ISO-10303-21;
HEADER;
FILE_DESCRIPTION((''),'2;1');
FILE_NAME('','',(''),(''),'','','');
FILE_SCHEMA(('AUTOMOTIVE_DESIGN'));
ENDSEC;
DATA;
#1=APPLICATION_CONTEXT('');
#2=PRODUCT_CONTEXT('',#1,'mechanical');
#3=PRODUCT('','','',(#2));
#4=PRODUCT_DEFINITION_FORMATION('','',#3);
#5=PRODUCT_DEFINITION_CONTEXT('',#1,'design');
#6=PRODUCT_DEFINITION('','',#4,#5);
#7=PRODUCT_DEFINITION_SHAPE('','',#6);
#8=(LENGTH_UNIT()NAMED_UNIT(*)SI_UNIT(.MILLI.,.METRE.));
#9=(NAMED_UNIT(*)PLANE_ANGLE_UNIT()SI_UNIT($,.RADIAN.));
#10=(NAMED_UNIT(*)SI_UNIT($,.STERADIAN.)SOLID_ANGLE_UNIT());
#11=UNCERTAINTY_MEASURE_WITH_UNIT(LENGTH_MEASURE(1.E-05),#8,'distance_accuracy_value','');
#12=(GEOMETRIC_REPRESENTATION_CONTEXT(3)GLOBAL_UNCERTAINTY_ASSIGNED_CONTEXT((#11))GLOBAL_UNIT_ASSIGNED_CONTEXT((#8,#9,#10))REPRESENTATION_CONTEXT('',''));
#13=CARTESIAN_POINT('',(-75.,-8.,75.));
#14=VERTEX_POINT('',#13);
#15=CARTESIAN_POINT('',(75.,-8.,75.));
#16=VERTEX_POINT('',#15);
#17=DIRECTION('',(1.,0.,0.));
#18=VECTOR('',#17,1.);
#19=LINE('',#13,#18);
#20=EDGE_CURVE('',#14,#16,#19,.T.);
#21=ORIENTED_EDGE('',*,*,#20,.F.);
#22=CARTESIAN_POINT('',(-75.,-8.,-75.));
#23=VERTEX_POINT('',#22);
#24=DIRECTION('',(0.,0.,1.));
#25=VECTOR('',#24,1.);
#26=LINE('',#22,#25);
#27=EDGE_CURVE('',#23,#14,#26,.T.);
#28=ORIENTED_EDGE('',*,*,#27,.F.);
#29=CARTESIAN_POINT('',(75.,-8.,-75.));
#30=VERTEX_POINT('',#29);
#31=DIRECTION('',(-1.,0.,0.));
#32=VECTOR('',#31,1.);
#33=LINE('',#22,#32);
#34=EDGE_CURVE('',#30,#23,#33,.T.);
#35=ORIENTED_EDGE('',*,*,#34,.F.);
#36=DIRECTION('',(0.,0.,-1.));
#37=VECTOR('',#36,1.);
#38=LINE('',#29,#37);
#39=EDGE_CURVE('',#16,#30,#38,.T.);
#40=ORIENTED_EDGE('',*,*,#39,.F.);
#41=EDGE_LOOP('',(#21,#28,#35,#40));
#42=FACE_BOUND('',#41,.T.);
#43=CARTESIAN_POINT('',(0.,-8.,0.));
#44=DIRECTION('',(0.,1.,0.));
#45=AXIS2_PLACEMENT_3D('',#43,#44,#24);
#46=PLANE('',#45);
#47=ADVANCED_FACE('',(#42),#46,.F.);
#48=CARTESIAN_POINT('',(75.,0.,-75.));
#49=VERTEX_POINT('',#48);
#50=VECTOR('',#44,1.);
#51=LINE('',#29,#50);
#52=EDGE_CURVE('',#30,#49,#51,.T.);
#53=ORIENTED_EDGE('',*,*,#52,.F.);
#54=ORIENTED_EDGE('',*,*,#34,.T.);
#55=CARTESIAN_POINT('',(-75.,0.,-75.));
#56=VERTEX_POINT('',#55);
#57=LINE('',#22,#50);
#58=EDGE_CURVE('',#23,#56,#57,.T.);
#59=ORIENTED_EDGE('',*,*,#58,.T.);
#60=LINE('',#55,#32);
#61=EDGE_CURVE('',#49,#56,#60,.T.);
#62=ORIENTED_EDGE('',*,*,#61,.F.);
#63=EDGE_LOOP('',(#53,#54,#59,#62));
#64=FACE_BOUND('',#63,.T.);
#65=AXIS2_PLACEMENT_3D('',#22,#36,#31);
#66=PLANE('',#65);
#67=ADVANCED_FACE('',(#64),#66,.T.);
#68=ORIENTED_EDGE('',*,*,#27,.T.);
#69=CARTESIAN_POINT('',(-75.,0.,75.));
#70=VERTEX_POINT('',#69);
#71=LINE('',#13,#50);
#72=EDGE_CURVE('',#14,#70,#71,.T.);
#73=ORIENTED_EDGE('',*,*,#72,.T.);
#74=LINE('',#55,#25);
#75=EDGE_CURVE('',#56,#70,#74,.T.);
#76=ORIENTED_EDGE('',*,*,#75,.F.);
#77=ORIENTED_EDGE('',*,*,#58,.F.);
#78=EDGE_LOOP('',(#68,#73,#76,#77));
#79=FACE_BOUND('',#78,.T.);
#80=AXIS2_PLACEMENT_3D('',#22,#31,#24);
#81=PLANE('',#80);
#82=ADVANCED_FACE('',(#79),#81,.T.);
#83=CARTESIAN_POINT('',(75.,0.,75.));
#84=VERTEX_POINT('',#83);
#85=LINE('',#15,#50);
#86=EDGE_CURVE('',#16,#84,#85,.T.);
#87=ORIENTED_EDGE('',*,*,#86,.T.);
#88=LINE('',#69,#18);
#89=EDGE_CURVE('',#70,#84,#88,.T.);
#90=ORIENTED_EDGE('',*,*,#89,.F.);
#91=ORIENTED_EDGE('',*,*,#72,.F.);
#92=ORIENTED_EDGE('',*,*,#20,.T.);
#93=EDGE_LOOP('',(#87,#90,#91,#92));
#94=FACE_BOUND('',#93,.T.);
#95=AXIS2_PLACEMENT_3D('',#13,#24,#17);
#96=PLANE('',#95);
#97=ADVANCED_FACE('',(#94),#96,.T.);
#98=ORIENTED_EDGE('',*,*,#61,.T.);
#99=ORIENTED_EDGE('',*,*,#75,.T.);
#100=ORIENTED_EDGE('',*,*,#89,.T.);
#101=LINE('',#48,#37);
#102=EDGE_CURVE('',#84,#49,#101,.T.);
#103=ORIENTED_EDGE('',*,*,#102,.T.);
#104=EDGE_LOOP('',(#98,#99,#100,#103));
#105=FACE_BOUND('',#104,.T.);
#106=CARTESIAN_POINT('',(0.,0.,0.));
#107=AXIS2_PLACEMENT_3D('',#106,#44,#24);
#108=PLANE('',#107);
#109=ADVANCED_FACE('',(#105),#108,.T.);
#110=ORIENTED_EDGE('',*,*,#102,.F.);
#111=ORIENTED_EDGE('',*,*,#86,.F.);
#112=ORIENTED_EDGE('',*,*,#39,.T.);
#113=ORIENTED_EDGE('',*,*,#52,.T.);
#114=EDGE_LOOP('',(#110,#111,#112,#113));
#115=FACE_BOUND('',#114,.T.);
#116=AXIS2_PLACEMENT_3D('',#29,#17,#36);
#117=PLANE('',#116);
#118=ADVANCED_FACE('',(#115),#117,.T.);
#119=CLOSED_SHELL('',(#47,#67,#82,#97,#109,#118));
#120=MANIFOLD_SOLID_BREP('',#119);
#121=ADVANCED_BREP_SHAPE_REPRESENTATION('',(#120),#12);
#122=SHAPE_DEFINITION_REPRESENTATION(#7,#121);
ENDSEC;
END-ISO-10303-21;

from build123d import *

# Parameters (mm, degrees)
SKETCH_1_W             = 150
SKETCH_1_H             = 150
SM_BASE_FLANGE_1_DEPTH = 8


# Sheet-metal steps are written as plain solids
with BuildPart() as part:
    # Sketch 1 → Базовая кромка1 (new body)
    with BuildSketch(Plane(origin=(0, 0, 0), x_dir=(1, 0, 0), z_dir=(0, 1, 0))):
        Rectangle(SKETCH_1_W, SKETCH_1_H)
    extrude(amount=-SM_BASE_FLANGE_1_DEPTH)


solid = part.part
